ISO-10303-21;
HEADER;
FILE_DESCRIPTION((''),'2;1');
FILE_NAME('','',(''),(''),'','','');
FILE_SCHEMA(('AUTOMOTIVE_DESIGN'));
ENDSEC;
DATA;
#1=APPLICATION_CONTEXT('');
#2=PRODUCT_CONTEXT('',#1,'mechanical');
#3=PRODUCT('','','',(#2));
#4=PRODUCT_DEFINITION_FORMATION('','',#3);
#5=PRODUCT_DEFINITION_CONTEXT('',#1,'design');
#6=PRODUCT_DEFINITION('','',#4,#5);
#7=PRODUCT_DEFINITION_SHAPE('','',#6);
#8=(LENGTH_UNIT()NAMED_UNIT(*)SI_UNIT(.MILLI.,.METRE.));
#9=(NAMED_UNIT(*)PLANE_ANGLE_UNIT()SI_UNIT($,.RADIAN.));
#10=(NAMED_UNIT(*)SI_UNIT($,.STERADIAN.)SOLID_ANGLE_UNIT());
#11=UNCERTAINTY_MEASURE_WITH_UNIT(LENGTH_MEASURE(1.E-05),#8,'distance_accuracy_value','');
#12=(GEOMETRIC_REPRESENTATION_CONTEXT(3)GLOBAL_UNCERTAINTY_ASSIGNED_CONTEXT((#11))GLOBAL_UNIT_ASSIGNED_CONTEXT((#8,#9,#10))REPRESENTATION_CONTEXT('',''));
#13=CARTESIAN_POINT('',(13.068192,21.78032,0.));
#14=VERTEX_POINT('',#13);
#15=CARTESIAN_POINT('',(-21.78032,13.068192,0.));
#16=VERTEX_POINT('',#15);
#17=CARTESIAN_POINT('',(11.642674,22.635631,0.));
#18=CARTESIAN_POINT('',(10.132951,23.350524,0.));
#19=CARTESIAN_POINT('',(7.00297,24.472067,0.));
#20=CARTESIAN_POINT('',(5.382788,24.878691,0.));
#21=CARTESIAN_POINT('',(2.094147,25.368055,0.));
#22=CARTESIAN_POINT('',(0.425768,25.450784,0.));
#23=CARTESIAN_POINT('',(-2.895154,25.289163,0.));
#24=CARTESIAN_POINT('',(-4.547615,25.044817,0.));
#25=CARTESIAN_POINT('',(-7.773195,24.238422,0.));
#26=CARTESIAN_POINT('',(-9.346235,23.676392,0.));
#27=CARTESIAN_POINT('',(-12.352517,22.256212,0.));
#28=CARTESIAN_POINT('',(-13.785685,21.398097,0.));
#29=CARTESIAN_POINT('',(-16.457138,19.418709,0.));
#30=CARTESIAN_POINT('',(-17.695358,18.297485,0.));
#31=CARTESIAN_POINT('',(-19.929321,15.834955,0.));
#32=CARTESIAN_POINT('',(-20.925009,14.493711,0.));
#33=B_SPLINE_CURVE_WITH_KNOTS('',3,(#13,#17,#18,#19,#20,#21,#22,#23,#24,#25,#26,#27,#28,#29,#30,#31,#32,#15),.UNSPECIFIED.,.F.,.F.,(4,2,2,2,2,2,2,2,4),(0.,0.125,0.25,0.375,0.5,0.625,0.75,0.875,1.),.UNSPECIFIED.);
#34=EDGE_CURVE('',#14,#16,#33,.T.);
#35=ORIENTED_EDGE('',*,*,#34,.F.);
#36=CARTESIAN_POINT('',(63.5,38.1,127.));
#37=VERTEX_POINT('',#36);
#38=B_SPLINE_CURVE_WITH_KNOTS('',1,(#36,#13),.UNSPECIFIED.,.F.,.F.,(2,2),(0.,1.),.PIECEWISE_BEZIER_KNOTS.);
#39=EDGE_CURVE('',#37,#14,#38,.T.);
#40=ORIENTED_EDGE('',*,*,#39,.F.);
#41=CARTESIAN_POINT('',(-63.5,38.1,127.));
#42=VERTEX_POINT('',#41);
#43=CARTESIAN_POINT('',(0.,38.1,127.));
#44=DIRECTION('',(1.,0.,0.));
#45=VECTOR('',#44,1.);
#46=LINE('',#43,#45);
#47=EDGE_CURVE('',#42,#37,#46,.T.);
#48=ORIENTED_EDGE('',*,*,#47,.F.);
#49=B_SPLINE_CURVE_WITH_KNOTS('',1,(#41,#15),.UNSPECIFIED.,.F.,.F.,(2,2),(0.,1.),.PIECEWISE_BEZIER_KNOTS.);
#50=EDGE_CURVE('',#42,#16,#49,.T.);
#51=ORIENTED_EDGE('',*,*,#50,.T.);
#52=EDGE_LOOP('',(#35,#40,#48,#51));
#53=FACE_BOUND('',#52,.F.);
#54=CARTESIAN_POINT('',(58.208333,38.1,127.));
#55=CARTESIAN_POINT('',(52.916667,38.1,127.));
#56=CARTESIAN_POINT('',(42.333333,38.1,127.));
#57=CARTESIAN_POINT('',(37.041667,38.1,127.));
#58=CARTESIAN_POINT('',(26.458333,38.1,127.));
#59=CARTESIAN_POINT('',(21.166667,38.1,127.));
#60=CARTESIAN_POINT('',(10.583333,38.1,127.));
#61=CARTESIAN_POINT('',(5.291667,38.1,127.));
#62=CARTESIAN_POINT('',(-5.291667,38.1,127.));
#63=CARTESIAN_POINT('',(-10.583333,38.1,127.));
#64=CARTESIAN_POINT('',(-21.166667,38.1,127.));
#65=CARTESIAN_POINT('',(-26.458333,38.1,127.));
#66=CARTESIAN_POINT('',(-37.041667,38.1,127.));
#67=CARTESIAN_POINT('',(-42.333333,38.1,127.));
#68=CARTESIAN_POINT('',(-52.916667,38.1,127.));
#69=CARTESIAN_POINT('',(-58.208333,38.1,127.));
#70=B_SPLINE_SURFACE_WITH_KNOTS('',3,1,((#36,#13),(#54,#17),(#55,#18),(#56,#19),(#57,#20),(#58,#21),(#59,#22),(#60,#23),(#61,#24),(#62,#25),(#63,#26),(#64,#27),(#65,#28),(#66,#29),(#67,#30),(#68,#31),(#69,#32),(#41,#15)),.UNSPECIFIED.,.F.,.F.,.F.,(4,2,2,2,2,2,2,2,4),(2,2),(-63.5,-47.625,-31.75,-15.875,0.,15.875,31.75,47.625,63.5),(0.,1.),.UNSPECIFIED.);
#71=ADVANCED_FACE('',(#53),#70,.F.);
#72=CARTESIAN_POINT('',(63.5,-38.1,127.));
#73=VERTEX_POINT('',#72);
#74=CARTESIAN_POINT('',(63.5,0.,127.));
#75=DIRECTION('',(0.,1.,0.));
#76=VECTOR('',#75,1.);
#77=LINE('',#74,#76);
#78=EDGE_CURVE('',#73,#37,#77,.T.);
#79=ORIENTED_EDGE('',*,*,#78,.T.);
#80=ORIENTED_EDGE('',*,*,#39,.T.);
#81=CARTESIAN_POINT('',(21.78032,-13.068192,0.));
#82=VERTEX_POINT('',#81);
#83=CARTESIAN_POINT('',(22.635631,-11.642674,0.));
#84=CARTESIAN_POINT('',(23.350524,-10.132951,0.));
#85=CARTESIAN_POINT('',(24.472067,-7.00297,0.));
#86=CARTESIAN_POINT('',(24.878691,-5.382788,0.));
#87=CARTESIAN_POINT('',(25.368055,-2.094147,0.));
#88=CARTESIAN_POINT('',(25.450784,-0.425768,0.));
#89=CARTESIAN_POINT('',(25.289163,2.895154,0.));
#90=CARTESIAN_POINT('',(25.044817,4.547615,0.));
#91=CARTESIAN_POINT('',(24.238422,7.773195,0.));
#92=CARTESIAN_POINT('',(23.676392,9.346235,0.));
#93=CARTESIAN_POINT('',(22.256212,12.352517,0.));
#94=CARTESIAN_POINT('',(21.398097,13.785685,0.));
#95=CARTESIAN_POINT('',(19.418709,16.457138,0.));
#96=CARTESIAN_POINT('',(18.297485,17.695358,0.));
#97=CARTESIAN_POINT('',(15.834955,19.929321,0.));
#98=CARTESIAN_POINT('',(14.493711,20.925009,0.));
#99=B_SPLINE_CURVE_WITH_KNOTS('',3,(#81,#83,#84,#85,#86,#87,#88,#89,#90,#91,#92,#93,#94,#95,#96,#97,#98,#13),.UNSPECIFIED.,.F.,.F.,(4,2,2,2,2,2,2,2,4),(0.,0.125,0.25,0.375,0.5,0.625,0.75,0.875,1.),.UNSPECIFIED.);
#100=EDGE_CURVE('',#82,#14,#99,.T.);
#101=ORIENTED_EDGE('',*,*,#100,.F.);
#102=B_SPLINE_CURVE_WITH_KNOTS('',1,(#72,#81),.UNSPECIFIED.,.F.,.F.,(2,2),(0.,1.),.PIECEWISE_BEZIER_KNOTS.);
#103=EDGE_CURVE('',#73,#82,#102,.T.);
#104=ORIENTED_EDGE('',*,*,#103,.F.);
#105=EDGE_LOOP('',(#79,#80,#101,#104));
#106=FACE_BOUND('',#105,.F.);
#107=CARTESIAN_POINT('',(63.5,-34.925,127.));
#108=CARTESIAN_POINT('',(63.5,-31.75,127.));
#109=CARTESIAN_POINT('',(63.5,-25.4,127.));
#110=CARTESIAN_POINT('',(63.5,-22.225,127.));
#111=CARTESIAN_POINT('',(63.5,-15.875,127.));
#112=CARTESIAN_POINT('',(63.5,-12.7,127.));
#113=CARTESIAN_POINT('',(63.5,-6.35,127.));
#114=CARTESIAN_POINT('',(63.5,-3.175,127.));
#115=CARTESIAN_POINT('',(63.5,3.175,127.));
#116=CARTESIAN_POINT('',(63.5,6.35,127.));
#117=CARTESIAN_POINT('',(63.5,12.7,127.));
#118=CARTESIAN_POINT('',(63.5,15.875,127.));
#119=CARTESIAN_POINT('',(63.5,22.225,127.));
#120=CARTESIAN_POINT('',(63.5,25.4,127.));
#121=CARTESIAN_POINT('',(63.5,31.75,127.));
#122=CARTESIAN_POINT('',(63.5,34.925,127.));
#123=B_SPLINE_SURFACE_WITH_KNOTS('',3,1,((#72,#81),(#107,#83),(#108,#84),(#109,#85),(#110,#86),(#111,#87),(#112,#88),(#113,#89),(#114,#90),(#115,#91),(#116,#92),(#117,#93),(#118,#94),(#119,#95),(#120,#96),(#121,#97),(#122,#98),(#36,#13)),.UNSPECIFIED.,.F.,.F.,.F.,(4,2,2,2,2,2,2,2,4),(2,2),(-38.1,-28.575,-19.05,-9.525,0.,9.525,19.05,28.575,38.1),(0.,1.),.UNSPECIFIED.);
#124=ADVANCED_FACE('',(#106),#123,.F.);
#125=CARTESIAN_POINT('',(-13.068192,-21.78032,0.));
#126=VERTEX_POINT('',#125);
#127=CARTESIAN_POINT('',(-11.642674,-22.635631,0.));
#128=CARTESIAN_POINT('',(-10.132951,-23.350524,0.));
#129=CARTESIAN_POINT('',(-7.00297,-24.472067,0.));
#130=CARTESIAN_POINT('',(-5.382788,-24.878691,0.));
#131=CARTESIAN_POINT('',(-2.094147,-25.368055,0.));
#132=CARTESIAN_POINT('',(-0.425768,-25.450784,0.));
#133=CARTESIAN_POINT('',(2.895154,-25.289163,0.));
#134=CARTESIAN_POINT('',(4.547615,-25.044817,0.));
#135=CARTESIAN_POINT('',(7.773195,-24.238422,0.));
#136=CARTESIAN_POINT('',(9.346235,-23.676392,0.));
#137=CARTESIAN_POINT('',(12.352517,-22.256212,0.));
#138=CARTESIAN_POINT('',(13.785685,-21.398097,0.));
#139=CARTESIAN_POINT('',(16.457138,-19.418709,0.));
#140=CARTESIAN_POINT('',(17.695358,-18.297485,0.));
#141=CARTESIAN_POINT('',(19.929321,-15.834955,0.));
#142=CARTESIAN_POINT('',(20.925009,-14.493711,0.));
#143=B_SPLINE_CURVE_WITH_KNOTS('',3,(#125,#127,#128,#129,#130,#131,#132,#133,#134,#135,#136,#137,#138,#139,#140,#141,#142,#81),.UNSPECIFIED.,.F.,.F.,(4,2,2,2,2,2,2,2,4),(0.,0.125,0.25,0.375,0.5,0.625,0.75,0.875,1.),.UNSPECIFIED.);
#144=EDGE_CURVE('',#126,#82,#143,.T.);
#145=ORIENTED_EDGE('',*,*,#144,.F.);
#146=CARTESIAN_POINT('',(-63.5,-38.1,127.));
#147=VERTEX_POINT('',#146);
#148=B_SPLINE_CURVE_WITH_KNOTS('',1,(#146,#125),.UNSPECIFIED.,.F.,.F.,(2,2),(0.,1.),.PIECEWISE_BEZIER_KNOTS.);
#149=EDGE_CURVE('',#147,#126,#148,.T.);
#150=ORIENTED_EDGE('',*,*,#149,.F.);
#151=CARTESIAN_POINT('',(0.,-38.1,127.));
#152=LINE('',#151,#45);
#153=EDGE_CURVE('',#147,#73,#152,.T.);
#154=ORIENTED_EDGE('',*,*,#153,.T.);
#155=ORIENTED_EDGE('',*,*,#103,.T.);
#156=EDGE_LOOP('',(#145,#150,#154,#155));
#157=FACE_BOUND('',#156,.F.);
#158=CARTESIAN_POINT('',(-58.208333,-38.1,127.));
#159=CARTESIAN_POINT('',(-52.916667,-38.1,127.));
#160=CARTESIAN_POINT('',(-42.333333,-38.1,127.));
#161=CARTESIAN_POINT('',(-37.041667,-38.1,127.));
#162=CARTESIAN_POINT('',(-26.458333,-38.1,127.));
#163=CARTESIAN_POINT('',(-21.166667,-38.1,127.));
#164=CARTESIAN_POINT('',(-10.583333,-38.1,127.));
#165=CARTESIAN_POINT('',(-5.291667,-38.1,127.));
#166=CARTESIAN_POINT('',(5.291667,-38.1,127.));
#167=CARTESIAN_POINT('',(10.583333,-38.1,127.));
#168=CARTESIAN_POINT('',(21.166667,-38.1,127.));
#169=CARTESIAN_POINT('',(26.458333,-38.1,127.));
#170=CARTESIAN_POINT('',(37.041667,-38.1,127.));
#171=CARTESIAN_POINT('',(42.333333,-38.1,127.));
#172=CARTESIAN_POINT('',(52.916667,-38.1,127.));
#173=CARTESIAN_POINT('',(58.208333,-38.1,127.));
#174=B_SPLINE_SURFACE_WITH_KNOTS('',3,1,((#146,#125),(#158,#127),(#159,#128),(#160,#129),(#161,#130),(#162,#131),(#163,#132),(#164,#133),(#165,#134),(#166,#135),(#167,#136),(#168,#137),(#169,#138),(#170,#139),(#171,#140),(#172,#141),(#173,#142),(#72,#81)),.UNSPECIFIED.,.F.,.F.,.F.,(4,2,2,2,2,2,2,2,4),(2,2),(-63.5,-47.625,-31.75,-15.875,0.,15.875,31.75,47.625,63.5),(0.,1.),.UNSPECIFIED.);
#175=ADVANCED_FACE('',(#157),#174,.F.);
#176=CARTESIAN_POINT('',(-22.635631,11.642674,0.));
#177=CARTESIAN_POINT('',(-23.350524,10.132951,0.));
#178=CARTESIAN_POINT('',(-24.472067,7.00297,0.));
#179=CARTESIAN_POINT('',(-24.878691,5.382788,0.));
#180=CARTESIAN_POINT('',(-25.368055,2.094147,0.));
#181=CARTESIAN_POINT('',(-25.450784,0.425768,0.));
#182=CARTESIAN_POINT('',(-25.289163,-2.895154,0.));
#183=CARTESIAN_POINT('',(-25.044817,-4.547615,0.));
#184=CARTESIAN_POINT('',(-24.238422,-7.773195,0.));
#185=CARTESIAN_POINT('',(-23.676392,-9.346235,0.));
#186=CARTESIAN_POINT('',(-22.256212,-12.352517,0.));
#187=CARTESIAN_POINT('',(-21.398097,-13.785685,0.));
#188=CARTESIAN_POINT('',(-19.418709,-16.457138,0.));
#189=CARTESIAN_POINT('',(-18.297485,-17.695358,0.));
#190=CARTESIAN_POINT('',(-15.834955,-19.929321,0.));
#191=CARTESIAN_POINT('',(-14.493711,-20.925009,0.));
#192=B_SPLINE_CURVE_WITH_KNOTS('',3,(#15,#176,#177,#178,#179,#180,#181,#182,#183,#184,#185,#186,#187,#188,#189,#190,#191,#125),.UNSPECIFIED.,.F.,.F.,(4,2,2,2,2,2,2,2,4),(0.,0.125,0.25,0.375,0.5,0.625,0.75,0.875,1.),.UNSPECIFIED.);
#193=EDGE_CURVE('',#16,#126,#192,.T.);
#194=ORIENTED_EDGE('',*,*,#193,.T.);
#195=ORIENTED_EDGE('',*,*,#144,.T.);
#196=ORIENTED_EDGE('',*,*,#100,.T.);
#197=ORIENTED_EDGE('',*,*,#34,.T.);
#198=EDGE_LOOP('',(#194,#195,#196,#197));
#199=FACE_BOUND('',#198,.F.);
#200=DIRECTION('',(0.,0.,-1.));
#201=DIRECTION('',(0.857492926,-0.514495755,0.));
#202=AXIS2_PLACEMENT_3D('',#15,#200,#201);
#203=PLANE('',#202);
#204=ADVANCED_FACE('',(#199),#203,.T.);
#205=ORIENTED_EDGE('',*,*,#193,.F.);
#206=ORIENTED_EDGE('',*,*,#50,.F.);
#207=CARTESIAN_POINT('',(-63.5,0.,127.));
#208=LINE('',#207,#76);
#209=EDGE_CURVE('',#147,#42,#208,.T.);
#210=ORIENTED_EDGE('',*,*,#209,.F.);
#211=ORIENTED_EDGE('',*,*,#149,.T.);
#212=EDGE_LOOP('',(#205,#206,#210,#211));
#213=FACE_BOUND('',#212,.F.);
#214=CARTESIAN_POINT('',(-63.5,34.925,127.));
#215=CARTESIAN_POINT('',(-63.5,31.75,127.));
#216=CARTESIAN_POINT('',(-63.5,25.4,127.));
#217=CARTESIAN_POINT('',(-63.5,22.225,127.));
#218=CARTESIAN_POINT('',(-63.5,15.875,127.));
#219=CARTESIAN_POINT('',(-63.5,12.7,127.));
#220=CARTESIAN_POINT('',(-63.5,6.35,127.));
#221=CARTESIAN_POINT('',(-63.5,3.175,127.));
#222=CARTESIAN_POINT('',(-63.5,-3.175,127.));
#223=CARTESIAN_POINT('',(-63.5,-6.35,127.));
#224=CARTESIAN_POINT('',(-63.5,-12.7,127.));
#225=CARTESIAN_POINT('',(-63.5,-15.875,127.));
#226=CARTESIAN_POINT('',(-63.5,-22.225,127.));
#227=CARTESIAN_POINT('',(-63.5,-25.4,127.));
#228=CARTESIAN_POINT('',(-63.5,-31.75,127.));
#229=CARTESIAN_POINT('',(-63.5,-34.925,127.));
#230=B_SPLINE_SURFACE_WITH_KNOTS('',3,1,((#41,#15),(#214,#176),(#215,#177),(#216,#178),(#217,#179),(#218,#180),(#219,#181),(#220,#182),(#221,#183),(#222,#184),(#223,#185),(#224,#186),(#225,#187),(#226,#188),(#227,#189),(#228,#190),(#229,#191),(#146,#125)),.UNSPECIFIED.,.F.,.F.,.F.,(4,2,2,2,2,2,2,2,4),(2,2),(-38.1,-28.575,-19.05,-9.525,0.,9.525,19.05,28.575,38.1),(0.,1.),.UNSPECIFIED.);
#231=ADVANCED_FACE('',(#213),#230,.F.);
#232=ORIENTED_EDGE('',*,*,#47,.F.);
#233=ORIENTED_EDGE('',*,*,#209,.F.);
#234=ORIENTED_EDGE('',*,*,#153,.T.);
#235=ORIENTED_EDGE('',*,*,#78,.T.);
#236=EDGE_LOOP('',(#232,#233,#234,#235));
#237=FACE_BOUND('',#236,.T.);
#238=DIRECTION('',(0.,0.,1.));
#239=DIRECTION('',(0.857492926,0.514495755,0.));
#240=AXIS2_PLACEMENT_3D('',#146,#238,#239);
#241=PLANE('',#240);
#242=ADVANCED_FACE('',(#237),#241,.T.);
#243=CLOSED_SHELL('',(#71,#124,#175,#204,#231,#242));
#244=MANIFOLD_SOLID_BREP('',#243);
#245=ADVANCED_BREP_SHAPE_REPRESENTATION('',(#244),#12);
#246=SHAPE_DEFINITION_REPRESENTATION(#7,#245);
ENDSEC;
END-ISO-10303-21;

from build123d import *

# Parameters (mm, degrees)
F2_W = 127
F2_H = 76.2


# Not quite as in the source:
# - the arcs of a loft's sections are written as splines that run evenly, so that the points pair up as in the source's solid


with BuildPart() as f3:
    # F2 (on offset) → F3 section 0
    with BuildSketch(Plane.XY.offset(127)):
        Rectangle(F2_W, F2_H)
    # F1 (on Top) → F3 section 1
    with BuildSketch(Plane.XY):
        with BuildLine():
            add(Edge.make_bspline(
                [(-21.7803203131, 13.0681921879), (-22.6356314917, 11.6426735568), (-23.3505236623, 10.1329514593), (-24.472067113, 7.0029702123), (-24.8786906608, 5.3827884578), (-25.3680549193, 2.0941466499), (-25.4507835294, 0.4257679146), (-25.2891626016, -2.8951537939), (-25.04481706, -4.5476146508), (-24.2384219474, -7.773195101), (-23.6763923162, -9.3462349355), (-22.2562123309, -12.3525168797), (-21.3980970935, -13.7856846531), (-19.4187089559, -16.457138362), (-18.2974849998, -17.6953582406), (-15.8349554859, -19.9293212464), (-14.4937108189, -20.9250091345), (-13.0681921879, -21.7803203131)],
                knots=[0, 0, 0, 0, 0.125, 0.125, 0.25, 0.25, 0.375, 0.375, 0.5, 0.5, 0.625, 0.625, 0.75, 0.75, 0.875, 0.875, 1, 1, 1, 1], degree=3))
            add(Edge.make_bspline(
                [(-13.0681921879, -21.7803203131), (-11.6426735568, -22.6356314917), (-10.1329514593, -23.3505236623), (-7.0029702123, -24.472067113), (-5.3827884578, -24.8786906608), (-2.0941466499, -25.3680549193), (-0.4257679146, -25.4507835294), (2.8951537939, -25.2891626016), (4.5476146508, -25.04481706), (7.773195101, -24.2384219474), (9.3462349355, -23.6763923162), (12.3525168797, -22.2562123309), (13.7856846531, -21.3980970935), (16.457138362, -19.4187089559), (17.6953582406, -18.2974849998), (19.9293212464, -15.8349554859), (20.9250091345, -14.4937108189), (21.7803203131, -13.0681921879)],
                knots=[0, 0, 0, 0, 0.125, 0.125, 0.25, 0.25, 0.375, 0.375, 0.5, 0.5, 0.625, 0.625, 0.75, 0.75, 0.875, 0.875, 1, 1, 1, 1], degree=3))
            add(Edge.make_bspline(
                [(21.7803203131, -13.0681921879), (22.6356314917, -11.6426735568), (23.3505236623, -10.1329514593), (24.472067113, -7.0029702123), (24.8786906608, -5.3827884578), (25.3680549193, -2.0941466499), (25.4507835294, -0.4257679146), (25.2891626016, 2.8951537939), (25.04481706, 4.5476146508), (24.2384219474, 7.773195101), (23.6763923162, 9.3462349355), (22.2562123309, 12.3525168797), (21.3980970935, 13.7856846531), (19.4187089559, 16.457138362), (18.2974849998, 17.6953582406), (15.8349554859, 19.9293212464), (14.4937108189, 20.9250091345), (13.0681921879, 21.7803203131)],
                knots=[0, 0, 0, 0, 0.125, 0.125, 0.25, 0.25, 0.375, 0.375, 0.5, 0.5, 0.625, 0.625, 0.75, 0.75, 0.875, 0.875, 1, 1, 1, 1], degree=3))
            add(Edge.make_bspline(
                [(13.0681921879, 21.7803203131), (11.6426735568, 22.6356314917), (10.1329514593, 23.3505236623), (7.0029702123, 24.472067113), (5.3827884578, 24.8786906608), (2.0941466499, 25.3680549193), (0.4257679146, 25.4507835294), (-2.8951537939, 25.2891626016), (-4.5476146508, 25.04481706), (-7.773195101, 24.2384219474), (-9.3462349355, 23.6763923162), (-12.3525168797, 22.2562123309), (-13.7856846531, 21.3980970935), (-16.457138362, 19.4187089559), (-17.6953582406, 18.2974849998), (-19.9293212464, 15.8349554859), (-20.9250091345, 14.4937108189), (-21.7803203131, 13.0681921879)],
                knots=[0, 0, 0, 0, 0.125, 0.125, 0.25, 0.25, 0.375, 0.375, 0.5, 0.5, 0.625, 0.625, 0.75, 0.75, 0.875, 0.875, 1, 1, 1, 1], degree=3))
        make_face()
    loft(ruled=True)


solid = f3.part
